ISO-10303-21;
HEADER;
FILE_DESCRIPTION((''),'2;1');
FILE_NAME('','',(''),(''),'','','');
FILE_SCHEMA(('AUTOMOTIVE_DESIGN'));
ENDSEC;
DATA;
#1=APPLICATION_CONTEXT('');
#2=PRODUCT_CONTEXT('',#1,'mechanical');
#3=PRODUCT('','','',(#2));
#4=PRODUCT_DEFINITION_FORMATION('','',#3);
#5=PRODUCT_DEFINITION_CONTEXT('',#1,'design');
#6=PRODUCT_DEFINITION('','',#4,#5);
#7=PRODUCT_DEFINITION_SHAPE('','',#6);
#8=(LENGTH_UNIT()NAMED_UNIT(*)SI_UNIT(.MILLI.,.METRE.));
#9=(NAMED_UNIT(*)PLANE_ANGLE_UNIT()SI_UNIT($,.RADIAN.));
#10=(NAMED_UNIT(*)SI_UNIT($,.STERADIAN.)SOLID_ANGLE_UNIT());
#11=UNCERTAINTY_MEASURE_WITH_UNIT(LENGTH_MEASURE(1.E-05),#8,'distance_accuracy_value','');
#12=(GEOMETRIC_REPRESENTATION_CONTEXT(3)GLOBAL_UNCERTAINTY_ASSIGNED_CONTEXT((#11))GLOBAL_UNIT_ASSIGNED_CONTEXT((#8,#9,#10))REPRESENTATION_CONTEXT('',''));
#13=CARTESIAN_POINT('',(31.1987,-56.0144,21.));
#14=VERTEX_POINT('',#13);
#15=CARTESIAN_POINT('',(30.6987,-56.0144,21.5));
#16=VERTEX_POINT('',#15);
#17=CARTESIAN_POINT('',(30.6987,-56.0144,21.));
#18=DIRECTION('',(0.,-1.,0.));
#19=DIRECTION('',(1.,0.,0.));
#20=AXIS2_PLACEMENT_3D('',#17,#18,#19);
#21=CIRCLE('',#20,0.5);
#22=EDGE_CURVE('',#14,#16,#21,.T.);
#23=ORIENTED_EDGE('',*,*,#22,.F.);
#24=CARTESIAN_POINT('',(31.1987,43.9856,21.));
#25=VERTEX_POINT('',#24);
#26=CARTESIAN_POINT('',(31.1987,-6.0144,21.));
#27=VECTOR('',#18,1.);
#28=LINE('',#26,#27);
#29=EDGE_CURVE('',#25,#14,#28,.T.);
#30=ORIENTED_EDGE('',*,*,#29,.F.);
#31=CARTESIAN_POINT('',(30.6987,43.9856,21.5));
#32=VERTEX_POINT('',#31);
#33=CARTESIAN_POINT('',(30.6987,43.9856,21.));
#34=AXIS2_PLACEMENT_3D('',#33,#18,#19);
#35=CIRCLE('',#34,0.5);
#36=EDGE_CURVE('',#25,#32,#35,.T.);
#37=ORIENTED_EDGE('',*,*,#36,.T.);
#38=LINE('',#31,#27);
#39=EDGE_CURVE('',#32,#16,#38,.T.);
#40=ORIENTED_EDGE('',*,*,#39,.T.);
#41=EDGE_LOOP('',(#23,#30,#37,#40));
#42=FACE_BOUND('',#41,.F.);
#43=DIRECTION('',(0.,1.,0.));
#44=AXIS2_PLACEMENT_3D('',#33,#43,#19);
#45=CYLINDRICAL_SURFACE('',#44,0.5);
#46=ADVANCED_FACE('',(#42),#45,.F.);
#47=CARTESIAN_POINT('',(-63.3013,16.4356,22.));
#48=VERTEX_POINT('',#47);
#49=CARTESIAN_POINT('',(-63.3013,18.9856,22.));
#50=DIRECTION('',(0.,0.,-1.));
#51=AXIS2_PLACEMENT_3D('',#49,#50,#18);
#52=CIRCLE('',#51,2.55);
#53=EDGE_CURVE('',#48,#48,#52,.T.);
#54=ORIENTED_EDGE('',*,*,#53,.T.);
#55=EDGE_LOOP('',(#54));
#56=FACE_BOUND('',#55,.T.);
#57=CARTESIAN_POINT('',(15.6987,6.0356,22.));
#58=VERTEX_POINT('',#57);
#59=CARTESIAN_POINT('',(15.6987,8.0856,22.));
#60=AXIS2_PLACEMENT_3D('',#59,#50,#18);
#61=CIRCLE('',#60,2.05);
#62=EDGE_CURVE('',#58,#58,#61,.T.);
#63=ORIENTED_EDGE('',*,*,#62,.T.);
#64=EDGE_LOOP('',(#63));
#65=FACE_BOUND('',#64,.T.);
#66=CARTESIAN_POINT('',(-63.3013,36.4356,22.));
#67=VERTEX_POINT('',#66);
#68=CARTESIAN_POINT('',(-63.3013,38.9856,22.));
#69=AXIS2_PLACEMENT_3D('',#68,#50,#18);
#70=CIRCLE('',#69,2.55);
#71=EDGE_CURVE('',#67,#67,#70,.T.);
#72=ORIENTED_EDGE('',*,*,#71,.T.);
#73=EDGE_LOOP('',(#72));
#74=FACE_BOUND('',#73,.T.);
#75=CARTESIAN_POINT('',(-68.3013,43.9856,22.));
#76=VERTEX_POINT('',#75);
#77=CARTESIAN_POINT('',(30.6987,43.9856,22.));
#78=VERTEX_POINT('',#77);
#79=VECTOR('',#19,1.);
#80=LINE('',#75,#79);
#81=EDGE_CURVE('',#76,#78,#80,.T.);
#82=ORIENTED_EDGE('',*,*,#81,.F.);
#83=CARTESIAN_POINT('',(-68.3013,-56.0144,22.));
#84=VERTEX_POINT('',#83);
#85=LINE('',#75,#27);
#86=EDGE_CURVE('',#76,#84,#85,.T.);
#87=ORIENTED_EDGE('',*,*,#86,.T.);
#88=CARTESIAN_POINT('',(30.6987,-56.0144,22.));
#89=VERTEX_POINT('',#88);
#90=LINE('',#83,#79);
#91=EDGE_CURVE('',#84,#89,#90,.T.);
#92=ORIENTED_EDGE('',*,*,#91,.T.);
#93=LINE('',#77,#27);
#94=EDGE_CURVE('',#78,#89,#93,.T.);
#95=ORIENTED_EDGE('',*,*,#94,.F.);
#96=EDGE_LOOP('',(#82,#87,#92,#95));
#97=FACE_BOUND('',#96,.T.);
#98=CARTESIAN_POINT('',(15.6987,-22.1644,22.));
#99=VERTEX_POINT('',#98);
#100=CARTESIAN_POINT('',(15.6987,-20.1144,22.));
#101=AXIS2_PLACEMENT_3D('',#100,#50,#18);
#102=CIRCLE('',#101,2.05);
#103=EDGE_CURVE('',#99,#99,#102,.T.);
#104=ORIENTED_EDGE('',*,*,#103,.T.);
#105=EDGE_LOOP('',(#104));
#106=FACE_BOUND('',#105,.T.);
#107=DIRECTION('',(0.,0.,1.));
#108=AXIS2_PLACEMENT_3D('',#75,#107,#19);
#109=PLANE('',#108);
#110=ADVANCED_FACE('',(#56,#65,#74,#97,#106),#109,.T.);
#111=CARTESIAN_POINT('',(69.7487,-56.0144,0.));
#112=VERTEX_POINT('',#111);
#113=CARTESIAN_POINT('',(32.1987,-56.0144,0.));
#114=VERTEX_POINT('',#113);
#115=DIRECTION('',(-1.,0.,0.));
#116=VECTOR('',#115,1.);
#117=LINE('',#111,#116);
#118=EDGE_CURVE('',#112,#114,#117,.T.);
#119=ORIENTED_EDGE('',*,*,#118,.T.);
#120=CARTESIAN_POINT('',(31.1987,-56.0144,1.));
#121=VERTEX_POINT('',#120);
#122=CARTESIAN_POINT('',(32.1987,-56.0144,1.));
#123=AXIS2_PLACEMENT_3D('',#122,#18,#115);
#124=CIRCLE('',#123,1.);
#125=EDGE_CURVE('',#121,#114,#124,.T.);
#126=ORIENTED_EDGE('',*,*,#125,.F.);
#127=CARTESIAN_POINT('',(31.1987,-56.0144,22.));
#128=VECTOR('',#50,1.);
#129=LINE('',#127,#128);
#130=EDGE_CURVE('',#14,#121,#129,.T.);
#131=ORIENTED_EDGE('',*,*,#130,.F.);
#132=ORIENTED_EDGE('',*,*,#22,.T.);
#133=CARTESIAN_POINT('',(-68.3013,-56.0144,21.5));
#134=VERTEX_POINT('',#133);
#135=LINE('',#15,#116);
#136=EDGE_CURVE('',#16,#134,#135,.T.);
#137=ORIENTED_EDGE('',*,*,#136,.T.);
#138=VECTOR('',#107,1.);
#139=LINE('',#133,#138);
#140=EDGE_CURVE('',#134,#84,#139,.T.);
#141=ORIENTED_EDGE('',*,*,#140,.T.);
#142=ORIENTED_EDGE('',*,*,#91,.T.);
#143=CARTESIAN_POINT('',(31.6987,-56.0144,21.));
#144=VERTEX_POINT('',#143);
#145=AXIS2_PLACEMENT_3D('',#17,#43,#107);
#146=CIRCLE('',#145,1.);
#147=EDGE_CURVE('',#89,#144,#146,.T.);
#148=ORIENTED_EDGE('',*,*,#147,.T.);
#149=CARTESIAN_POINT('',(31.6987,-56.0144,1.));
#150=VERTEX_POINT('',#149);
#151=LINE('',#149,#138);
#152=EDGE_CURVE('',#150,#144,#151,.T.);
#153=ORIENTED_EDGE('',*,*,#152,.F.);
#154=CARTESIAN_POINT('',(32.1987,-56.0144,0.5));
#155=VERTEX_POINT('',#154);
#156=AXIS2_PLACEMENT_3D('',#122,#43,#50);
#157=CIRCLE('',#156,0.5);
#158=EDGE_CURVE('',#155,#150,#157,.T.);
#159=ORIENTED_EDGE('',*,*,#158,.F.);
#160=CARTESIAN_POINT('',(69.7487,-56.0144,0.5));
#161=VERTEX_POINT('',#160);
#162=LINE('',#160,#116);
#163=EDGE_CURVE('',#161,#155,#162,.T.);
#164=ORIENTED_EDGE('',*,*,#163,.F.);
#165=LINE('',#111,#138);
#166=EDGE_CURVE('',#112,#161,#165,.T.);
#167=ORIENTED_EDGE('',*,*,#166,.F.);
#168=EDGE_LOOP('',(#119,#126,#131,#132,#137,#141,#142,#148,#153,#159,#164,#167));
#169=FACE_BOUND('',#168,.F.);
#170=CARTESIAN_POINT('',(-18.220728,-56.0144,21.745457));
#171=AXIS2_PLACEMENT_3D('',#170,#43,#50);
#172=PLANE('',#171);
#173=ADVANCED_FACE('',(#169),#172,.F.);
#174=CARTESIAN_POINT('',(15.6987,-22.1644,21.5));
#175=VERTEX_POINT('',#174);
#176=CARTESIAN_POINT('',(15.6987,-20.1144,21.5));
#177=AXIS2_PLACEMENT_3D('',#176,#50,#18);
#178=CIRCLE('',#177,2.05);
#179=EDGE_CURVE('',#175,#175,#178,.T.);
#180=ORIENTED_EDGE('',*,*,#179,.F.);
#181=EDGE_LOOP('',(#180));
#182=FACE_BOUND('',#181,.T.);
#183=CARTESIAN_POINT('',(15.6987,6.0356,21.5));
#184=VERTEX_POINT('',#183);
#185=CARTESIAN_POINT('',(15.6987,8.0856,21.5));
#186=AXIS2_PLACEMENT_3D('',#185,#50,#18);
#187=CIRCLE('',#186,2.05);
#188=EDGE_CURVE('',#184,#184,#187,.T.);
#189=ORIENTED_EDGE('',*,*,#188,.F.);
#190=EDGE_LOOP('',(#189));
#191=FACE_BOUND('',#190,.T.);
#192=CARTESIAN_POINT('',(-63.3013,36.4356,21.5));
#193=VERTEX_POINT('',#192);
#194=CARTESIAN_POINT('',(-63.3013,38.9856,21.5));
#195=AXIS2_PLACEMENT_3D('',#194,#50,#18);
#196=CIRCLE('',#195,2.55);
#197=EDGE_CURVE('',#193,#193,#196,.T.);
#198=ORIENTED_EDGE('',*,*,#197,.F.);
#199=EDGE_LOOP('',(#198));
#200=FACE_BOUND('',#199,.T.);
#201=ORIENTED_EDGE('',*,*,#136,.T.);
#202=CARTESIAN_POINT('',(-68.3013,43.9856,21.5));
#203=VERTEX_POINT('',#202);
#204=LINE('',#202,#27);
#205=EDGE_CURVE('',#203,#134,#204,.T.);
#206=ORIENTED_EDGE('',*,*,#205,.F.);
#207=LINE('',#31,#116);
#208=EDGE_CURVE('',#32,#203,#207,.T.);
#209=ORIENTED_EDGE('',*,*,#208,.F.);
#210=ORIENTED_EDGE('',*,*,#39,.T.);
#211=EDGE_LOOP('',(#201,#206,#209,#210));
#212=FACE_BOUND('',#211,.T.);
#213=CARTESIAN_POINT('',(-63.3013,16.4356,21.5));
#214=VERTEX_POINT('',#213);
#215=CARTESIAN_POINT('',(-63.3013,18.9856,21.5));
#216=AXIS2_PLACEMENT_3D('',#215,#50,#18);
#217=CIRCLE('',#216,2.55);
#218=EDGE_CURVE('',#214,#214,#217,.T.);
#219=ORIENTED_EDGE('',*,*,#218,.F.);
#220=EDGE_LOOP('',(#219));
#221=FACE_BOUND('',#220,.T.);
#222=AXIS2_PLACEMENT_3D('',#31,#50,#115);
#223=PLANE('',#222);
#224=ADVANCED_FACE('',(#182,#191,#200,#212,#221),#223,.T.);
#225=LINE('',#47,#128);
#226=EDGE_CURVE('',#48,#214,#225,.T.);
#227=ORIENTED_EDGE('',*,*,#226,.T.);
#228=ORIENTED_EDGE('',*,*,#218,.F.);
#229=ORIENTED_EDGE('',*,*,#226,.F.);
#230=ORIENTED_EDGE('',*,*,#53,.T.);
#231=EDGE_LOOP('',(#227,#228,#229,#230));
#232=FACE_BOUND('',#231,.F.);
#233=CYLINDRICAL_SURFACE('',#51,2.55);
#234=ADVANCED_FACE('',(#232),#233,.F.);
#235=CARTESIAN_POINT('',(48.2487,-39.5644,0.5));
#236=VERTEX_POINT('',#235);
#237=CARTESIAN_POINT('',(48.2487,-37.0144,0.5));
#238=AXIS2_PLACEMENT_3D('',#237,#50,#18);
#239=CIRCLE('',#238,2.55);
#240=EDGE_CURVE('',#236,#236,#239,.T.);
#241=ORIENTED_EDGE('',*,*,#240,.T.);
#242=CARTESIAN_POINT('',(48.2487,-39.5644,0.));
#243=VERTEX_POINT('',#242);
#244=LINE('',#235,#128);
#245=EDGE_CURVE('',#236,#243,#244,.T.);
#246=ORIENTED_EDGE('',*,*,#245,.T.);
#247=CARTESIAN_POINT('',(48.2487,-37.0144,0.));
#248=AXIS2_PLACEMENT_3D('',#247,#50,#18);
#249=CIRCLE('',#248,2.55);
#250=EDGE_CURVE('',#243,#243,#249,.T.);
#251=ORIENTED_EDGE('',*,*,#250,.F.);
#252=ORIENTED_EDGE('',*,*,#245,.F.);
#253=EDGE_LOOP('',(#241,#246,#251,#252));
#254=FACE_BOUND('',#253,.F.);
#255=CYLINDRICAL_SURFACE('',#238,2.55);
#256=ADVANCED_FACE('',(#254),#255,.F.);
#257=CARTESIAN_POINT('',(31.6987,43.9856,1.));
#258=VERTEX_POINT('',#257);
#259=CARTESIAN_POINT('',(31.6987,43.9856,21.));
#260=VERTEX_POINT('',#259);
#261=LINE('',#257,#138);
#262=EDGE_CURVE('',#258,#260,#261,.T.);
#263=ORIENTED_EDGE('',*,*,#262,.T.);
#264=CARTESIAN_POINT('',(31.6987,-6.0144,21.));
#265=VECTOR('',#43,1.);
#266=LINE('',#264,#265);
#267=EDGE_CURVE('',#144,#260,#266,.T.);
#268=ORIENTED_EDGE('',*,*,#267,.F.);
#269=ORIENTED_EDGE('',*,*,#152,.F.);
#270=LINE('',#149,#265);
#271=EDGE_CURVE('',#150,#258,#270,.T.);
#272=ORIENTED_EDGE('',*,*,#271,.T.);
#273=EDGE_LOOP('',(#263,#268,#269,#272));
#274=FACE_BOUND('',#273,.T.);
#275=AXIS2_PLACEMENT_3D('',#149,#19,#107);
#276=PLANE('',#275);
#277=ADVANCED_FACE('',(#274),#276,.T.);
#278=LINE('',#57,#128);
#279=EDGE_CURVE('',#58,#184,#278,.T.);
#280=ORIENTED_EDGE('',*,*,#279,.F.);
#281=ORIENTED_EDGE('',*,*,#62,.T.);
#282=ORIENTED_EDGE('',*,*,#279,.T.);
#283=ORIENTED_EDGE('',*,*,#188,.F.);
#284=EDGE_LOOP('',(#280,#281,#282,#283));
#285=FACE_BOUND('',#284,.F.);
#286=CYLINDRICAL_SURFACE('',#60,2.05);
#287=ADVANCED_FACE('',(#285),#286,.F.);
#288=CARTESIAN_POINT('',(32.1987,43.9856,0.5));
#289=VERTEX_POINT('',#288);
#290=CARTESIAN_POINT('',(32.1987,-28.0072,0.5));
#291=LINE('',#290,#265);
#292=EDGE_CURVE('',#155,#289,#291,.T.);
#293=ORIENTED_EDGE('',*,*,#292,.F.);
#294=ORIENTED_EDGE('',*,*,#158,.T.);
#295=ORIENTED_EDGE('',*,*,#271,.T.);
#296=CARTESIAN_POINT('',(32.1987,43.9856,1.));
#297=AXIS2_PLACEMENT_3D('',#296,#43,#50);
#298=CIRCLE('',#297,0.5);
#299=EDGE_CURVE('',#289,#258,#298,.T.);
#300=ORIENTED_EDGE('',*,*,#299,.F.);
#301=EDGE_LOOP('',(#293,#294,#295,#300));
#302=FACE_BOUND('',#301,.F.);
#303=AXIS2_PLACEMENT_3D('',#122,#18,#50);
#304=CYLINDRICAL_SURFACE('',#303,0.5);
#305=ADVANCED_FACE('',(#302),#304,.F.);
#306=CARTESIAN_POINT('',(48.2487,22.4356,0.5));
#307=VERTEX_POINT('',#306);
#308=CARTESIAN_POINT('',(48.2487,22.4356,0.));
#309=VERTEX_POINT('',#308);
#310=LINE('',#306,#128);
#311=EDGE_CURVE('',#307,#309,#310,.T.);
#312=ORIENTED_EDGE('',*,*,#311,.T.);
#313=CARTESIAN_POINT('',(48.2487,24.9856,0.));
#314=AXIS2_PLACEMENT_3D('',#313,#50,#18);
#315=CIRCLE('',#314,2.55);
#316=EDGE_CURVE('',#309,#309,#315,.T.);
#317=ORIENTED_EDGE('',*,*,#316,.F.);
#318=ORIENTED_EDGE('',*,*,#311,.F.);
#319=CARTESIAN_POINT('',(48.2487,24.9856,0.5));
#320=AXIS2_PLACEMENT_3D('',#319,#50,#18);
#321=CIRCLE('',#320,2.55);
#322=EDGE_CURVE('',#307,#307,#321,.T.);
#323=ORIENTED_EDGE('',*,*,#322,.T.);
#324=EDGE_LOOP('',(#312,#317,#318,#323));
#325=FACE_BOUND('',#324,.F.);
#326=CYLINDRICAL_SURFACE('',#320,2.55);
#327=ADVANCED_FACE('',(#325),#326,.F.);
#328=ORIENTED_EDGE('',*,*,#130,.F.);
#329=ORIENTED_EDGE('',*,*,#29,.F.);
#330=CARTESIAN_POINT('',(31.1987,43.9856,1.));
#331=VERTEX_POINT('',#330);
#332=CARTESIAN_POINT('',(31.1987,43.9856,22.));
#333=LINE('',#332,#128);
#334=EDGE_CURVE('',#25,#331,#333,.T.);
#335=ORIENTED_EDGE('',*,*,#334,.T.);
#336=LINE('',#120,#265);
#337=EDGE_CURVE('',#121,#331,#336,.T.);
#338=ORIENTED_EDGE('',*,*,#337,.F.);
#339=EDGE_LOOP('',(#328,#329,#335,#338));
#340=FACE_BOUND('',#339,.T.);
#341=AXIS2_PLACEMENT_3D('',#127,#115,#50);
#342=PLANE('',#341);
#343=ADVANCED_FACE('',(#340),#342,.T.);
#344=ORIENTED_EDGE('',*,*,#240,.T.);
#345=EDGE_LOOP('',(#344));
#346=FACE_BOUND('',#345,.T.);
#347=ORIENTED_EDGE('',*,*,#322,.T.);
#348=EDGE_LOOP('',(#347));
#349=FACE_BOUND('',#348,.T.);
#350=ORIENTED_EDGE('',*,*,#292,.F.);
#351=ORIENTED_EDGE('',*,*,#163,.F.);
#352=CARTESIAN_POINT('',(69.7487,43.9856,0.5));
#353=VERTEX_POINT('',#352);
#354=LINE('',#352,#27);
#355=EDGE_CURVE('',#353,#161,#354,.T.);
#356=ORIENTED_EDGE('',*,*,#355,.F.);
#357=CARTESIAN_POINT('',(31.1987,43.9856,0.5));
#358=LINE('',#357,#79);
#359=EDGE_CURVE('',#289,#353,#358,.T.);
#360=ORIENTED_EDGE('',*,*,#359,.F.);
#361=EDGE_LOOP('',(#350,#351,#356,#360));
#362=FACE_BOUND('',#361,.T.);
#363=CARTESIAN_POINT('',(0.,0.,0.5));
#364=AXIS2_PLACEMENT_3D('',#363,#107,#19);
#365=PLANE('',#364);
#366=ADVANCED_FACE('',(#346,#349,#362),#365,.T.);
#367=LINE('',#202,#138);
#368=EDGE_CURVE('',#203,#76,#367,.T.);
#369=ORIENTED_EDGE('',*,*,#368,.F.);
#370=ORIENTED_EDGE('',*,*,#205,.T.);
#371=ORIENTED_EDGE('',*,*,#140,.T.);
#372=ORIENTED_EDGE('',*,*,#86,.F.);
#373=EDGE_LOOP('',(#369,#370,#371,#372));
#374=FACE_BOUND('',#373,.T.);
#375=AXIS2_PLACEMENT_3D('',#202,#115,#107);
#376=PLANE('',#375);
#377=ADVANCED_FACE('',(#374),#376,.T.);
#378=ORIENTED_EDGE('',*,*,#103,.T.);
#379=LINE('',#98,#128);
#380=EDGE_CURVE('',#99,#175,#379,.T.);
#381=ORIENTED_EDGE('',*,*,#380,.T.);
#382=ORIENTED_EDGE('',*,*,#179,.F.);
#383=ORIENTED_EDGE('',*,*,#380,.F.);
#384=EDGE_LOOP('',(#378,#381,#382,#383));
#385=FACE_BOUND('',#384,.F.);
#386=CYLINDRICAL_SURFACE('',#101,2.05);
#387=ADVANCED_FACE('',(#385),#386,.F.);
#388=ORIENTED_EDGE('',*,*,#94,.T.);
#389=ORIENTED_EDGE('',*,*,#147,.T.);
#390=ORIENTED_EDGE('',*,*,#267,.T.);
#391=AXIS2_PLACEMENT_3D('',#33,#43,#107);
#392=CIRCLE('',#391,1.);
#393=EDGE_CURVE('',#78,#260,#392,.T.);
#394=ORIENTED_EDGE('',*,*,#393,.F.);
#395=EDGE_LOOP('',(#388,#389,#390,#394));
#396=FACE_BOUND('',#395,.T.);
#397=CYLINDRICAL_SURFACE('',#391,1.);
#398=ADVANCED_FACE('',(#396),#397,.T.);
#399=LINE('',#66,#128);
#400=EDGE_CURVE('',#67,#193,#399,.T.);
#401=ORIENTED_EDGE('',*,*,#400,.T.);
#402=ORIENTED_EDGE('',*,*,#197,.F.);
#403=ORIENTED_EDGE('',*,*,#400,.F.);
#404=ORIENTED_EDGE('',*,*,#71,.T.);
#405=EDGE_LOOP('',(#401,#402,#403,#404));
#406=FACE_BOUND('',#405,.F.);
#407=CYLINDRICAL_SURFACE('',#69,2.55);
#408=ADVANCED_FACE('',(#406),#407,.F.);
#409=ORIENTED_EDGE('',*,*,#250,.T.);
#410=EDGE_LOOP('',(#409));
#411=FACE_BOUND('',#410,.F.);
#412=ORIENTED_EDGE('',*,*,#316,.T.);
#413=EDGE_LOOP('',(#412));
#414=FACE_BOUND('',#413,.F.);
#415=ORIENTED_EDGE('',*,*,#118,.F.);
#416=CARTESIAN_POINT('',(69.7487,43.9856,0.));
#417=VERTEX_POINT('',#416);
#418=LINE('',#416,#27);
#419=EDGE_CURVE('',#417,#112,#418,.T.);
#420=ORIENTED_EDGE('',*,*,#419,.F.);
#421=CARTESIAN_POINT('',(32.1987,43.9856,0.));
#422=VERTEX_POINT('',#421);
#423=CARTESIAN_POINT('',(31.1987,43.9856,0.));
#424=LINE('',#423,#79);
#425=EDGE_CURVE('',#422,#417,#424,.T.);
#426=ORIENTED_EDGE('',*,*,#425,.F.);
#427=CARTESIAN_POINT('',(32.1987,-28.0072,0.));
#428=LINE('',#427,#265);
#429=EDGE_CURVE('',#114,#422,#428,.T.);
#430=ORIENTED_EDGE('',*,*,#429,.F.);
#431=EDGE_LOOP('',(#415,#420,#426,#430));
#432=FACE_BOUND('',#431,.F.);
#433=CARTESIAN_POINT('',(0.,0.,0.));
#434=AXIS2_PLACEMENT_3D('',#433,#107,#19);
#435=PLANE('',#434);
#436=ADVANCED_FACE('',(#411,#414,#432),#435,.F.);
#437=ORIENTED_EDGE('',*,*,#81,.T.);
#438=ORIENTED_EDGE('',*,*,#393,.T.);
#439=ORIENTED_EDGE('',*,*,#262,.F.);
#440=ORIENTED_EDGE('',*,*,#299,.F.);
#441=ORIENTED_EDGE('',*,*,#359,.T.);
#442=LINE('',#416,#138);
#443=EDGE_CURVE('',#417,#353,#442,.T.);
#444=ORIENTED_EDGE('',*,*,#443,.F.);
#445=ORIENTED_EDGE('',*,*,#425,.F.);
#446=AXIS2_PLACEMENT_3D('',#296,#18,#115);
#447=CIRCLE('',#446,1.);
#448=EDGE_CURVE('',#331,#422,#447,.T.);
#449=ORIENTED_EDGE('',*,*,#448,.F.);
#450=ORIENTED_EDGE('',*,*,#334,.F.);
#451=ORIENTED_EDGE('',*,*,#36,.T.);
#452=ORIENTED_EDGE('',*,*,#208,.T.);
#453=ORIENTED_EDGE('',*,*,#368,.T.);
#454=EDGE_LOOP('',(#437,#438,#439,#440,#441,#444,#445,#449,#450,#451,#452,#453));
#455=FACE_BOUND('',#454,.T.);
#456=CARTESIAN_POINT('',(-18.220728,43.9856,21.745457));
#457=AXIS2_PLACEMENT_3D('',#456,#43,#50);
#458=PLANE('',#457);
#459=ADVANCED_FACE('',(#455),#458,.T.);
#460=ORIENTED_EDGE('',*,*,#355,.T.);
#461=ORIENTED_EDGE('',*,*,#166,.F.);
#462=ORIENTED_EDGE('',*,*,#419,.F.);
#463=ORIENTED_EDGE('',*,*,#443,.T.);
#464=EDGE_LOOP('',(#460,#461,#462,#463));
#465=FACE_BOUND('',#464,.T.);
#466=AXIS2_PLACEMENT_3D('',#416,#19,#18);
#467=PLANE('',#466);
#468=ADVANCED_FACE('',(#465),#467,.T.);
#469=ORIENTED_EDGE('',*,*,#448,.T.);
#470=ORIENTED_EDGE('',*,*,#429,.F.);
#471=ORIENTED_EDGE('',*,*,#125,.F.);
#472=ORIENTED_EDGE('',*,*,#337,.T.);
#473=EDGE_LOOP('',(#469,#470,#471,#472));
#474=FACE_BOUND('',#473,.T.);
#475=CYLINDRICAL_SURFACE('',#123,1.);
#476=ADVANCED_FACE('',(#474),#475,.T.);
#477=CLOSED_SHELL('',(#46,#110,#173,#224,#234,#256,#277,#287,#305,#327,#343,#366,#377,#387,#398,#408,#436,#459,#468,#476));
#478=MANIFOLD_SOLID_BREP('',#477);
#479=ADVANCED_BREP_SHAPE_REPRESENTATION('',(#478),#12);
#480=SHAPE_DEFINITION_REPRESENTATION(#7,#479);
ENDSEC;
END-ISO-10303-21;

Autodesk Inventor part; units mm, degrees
ref_plane "YZ Plane" through (0, 0, 0) normal (1, 0, 0) x (0, 1, 0)
ref_plane "XZ Plane" through (0, 0, 0) normal (0, 1, 0) x (-1, 0, 0)
ref_plane "XY Plane" through (0, 0, 0) normal (0, 0, 1) x (1, 0, 0)
sketch "Sketch1" plane through (0, 0, 0) normal (0, 0, 1) x (1, 0, 0)
  line L0 (31.1987, 43.9856) -> (69.7487, 43.9856)
  line L1 (69.7487, 43.9856) -> (69.7487, -56.0144)
  line L2 (69.7487, -56.0144) -> (31.1987, -56.0144)
  line L3 (31.1987, -56.0144) -> (31.1987, 43.9856)
  point P0 (0, 0)
  dimension "d0" = 100
  dimension "d1" = 38.55
extrude "Plate1" add sketch "Sketch1" along normal blind 0.5
sketch "Sketch2" plane through (31.6987, -56.0144, 0) normal (-1, 0, 0) x (0, -1, 0)
  line L0 (-100, 0) -> (0, 0)
  line L1 (0, 0) -> (0, 22)
  line L2 (0, 22) -> (-100, 22)
  line L3 (-100, 22) -> (-100, 0)
edge flange "Flange1" height 22 angle 90 thickness 0.5 bend radius 0.5 thickness toward (-1, 0, 0) relief tear relief width 0.5 relief depth 0.25 edges at (31.1987, -6.0144, 0.5) wall of the first edge with corners at (31.6987, 43.9856, 0) (31.6987, -56.0144, 0) (31.6987, -56.0144, 22) (31.6987, 43.9856, 22)
bend "Bend1"
corner "Corner1"
sketch "Sketch3" plane through (31.6987, 43.9856, 21.5) normal (0, 0, 1) x (1, 0, 0)
  line L0 (0, -100) -> (0, 0)
  line L1 (0, 0) -> (-100, 0)
  line L2 (-100, 0) -> (-100, -100)
  line L3 (-100, -100) -> (0, -100)
edge flange "Flange2" height 100 angle 90 thickness 0.5 bend radius 0.5 thickness toward (0, 0, 1) relief tear relief width 0.5 relief depth 0.25 edges at (31.1987, -6.0144, 22) wall of the first edge with corners at (31.6987, -56.0144, 21.5) (31.6987, 43.9856, 21.5) (-68.3013, 43.9856, 21.5) (-68.3013, -56.0144, 21.5)
bend "Bend2"
corner "Corner2"
sketch "Sketch4" plane through (0, 0, 0.5) normal (0, 0, 1) x (1, 0, 0)
  line L0 (48.2487, 25.2184) -> (48.2487, -36.8148) construction
  line L1 (32.1987, 43.9856) -> (69.7487, 43.9856) projected
  line L2 (69.7487, -56.0144) -> (32.1987, -56.0144) projected
  line L3 (69.7487, 43.9856) -> (69.7487, -56.0144) projected
  point P0 (0, 0)
  point P1 (48.2487, 24.9856)
  point P2 (48.2487, -37.0144)
  dimension "d23" = 19
  dimension "d24" = 62
  dimension "d25" = 19
  dimension "d26" = 21.5
hole "Hole1" at (48.2487, 24.9856, 0.5) at (48.2487, -37.0144, 0.5) direction (0, 0, -1) diameter 5.1 end through all
sketch "Sketch5" plane through (-68.3013, -56.0144, 22) normal (0, 0, 1) x (1, 0, 0)
  line L0 (84, 64.1) -> (84, 35.9) construction
  line L1 (0, 100) -> (99, 100) projected
  line L2 (99, 0) -> (0, 0) projected
  line L3 (99, 0) -> (99, 100) projected
  point P0 (68.3013, 56.0144)
  dimension "d34" = 28.2
  dimension "d35" = 35.9
  dimension "d36" = 35.9
  dimension "d37" = 15
hole "Hole2" at (15.6987, 8.0856, 22) at (15.6987, -20.1144, 22) direction (0, 0, -1) diameter 4.1 end through all
sketch "Sketch6" plane through (-68.3013, -56.0144, 22) normal (0, 0, 1) x (1, 0, 0)
  line L0 (5, 95) -> (5, 75) construction
  line L1 (0, 100) -> (99, 100) projected
  line L2 (0, 0) -> (0, 100) projected
  point P0 (68.3013, 56.0144)
  dimension "d45" = 20
  dimension "d46" = 5
  dimension "d47" = 5
hole "Hole3" at (-63.3013, 38.9856, 22) at (-63.3013, 18.9856, 22) direction (0, 0, -1) diameter 5.1 end through all
equation "\"d23\" = d25"
equation "\"d32\" = Thickness"
equation "\"d35\" = d36"
equation "\"d2\" = Thickness"
equation "\"d3\" = BendReliefWidth"
equation "\"d4\" = BendReliefDepth"
equation "\"d5\" = MinimumRemnant"
equation "\"d6\" = TransitionRadius"
equation "\"d9\" = BendRadius"
equation "\"d10\" = CornerReliefSize"
equation "\"d11\" = GapSize"
equation "\"d12\" = JacobiRadiusSize"
equation "\"d13\" = BendReliefWidth"
equation "\"d14\" = BendReliefDepth"
equation "\"d15\" = MinimumRemnant"
equation "\"d16\" = TransitionRadius"
equation "\"d19\" = BendRadius"
equation "\"d20\" = CornerReliefSize"
equation "\"d21\" = GapSize"
equation "\"d22\" = JacobiRadiusSize"
equation "\"BendRadius\" = Thickness"
equation "\"BendReliefWidth\" = Thickness"
equation "\"BendReliefDepth\" = 0.5 * Thickness"
equation "\"CornerReliefSize\" = 4 * Thickness"
equation "\"MinimumRemnant\" = 2 * Thickness"
equation "\"TransitionRadius\" = BendRadius"
equation "\"JacobiRadiusSize\" = BendRadius"
equation "\"GapSize\" = Thickness"
equation "\"Thickness\" = 0.5"
properties part number "Placa Montaje"
